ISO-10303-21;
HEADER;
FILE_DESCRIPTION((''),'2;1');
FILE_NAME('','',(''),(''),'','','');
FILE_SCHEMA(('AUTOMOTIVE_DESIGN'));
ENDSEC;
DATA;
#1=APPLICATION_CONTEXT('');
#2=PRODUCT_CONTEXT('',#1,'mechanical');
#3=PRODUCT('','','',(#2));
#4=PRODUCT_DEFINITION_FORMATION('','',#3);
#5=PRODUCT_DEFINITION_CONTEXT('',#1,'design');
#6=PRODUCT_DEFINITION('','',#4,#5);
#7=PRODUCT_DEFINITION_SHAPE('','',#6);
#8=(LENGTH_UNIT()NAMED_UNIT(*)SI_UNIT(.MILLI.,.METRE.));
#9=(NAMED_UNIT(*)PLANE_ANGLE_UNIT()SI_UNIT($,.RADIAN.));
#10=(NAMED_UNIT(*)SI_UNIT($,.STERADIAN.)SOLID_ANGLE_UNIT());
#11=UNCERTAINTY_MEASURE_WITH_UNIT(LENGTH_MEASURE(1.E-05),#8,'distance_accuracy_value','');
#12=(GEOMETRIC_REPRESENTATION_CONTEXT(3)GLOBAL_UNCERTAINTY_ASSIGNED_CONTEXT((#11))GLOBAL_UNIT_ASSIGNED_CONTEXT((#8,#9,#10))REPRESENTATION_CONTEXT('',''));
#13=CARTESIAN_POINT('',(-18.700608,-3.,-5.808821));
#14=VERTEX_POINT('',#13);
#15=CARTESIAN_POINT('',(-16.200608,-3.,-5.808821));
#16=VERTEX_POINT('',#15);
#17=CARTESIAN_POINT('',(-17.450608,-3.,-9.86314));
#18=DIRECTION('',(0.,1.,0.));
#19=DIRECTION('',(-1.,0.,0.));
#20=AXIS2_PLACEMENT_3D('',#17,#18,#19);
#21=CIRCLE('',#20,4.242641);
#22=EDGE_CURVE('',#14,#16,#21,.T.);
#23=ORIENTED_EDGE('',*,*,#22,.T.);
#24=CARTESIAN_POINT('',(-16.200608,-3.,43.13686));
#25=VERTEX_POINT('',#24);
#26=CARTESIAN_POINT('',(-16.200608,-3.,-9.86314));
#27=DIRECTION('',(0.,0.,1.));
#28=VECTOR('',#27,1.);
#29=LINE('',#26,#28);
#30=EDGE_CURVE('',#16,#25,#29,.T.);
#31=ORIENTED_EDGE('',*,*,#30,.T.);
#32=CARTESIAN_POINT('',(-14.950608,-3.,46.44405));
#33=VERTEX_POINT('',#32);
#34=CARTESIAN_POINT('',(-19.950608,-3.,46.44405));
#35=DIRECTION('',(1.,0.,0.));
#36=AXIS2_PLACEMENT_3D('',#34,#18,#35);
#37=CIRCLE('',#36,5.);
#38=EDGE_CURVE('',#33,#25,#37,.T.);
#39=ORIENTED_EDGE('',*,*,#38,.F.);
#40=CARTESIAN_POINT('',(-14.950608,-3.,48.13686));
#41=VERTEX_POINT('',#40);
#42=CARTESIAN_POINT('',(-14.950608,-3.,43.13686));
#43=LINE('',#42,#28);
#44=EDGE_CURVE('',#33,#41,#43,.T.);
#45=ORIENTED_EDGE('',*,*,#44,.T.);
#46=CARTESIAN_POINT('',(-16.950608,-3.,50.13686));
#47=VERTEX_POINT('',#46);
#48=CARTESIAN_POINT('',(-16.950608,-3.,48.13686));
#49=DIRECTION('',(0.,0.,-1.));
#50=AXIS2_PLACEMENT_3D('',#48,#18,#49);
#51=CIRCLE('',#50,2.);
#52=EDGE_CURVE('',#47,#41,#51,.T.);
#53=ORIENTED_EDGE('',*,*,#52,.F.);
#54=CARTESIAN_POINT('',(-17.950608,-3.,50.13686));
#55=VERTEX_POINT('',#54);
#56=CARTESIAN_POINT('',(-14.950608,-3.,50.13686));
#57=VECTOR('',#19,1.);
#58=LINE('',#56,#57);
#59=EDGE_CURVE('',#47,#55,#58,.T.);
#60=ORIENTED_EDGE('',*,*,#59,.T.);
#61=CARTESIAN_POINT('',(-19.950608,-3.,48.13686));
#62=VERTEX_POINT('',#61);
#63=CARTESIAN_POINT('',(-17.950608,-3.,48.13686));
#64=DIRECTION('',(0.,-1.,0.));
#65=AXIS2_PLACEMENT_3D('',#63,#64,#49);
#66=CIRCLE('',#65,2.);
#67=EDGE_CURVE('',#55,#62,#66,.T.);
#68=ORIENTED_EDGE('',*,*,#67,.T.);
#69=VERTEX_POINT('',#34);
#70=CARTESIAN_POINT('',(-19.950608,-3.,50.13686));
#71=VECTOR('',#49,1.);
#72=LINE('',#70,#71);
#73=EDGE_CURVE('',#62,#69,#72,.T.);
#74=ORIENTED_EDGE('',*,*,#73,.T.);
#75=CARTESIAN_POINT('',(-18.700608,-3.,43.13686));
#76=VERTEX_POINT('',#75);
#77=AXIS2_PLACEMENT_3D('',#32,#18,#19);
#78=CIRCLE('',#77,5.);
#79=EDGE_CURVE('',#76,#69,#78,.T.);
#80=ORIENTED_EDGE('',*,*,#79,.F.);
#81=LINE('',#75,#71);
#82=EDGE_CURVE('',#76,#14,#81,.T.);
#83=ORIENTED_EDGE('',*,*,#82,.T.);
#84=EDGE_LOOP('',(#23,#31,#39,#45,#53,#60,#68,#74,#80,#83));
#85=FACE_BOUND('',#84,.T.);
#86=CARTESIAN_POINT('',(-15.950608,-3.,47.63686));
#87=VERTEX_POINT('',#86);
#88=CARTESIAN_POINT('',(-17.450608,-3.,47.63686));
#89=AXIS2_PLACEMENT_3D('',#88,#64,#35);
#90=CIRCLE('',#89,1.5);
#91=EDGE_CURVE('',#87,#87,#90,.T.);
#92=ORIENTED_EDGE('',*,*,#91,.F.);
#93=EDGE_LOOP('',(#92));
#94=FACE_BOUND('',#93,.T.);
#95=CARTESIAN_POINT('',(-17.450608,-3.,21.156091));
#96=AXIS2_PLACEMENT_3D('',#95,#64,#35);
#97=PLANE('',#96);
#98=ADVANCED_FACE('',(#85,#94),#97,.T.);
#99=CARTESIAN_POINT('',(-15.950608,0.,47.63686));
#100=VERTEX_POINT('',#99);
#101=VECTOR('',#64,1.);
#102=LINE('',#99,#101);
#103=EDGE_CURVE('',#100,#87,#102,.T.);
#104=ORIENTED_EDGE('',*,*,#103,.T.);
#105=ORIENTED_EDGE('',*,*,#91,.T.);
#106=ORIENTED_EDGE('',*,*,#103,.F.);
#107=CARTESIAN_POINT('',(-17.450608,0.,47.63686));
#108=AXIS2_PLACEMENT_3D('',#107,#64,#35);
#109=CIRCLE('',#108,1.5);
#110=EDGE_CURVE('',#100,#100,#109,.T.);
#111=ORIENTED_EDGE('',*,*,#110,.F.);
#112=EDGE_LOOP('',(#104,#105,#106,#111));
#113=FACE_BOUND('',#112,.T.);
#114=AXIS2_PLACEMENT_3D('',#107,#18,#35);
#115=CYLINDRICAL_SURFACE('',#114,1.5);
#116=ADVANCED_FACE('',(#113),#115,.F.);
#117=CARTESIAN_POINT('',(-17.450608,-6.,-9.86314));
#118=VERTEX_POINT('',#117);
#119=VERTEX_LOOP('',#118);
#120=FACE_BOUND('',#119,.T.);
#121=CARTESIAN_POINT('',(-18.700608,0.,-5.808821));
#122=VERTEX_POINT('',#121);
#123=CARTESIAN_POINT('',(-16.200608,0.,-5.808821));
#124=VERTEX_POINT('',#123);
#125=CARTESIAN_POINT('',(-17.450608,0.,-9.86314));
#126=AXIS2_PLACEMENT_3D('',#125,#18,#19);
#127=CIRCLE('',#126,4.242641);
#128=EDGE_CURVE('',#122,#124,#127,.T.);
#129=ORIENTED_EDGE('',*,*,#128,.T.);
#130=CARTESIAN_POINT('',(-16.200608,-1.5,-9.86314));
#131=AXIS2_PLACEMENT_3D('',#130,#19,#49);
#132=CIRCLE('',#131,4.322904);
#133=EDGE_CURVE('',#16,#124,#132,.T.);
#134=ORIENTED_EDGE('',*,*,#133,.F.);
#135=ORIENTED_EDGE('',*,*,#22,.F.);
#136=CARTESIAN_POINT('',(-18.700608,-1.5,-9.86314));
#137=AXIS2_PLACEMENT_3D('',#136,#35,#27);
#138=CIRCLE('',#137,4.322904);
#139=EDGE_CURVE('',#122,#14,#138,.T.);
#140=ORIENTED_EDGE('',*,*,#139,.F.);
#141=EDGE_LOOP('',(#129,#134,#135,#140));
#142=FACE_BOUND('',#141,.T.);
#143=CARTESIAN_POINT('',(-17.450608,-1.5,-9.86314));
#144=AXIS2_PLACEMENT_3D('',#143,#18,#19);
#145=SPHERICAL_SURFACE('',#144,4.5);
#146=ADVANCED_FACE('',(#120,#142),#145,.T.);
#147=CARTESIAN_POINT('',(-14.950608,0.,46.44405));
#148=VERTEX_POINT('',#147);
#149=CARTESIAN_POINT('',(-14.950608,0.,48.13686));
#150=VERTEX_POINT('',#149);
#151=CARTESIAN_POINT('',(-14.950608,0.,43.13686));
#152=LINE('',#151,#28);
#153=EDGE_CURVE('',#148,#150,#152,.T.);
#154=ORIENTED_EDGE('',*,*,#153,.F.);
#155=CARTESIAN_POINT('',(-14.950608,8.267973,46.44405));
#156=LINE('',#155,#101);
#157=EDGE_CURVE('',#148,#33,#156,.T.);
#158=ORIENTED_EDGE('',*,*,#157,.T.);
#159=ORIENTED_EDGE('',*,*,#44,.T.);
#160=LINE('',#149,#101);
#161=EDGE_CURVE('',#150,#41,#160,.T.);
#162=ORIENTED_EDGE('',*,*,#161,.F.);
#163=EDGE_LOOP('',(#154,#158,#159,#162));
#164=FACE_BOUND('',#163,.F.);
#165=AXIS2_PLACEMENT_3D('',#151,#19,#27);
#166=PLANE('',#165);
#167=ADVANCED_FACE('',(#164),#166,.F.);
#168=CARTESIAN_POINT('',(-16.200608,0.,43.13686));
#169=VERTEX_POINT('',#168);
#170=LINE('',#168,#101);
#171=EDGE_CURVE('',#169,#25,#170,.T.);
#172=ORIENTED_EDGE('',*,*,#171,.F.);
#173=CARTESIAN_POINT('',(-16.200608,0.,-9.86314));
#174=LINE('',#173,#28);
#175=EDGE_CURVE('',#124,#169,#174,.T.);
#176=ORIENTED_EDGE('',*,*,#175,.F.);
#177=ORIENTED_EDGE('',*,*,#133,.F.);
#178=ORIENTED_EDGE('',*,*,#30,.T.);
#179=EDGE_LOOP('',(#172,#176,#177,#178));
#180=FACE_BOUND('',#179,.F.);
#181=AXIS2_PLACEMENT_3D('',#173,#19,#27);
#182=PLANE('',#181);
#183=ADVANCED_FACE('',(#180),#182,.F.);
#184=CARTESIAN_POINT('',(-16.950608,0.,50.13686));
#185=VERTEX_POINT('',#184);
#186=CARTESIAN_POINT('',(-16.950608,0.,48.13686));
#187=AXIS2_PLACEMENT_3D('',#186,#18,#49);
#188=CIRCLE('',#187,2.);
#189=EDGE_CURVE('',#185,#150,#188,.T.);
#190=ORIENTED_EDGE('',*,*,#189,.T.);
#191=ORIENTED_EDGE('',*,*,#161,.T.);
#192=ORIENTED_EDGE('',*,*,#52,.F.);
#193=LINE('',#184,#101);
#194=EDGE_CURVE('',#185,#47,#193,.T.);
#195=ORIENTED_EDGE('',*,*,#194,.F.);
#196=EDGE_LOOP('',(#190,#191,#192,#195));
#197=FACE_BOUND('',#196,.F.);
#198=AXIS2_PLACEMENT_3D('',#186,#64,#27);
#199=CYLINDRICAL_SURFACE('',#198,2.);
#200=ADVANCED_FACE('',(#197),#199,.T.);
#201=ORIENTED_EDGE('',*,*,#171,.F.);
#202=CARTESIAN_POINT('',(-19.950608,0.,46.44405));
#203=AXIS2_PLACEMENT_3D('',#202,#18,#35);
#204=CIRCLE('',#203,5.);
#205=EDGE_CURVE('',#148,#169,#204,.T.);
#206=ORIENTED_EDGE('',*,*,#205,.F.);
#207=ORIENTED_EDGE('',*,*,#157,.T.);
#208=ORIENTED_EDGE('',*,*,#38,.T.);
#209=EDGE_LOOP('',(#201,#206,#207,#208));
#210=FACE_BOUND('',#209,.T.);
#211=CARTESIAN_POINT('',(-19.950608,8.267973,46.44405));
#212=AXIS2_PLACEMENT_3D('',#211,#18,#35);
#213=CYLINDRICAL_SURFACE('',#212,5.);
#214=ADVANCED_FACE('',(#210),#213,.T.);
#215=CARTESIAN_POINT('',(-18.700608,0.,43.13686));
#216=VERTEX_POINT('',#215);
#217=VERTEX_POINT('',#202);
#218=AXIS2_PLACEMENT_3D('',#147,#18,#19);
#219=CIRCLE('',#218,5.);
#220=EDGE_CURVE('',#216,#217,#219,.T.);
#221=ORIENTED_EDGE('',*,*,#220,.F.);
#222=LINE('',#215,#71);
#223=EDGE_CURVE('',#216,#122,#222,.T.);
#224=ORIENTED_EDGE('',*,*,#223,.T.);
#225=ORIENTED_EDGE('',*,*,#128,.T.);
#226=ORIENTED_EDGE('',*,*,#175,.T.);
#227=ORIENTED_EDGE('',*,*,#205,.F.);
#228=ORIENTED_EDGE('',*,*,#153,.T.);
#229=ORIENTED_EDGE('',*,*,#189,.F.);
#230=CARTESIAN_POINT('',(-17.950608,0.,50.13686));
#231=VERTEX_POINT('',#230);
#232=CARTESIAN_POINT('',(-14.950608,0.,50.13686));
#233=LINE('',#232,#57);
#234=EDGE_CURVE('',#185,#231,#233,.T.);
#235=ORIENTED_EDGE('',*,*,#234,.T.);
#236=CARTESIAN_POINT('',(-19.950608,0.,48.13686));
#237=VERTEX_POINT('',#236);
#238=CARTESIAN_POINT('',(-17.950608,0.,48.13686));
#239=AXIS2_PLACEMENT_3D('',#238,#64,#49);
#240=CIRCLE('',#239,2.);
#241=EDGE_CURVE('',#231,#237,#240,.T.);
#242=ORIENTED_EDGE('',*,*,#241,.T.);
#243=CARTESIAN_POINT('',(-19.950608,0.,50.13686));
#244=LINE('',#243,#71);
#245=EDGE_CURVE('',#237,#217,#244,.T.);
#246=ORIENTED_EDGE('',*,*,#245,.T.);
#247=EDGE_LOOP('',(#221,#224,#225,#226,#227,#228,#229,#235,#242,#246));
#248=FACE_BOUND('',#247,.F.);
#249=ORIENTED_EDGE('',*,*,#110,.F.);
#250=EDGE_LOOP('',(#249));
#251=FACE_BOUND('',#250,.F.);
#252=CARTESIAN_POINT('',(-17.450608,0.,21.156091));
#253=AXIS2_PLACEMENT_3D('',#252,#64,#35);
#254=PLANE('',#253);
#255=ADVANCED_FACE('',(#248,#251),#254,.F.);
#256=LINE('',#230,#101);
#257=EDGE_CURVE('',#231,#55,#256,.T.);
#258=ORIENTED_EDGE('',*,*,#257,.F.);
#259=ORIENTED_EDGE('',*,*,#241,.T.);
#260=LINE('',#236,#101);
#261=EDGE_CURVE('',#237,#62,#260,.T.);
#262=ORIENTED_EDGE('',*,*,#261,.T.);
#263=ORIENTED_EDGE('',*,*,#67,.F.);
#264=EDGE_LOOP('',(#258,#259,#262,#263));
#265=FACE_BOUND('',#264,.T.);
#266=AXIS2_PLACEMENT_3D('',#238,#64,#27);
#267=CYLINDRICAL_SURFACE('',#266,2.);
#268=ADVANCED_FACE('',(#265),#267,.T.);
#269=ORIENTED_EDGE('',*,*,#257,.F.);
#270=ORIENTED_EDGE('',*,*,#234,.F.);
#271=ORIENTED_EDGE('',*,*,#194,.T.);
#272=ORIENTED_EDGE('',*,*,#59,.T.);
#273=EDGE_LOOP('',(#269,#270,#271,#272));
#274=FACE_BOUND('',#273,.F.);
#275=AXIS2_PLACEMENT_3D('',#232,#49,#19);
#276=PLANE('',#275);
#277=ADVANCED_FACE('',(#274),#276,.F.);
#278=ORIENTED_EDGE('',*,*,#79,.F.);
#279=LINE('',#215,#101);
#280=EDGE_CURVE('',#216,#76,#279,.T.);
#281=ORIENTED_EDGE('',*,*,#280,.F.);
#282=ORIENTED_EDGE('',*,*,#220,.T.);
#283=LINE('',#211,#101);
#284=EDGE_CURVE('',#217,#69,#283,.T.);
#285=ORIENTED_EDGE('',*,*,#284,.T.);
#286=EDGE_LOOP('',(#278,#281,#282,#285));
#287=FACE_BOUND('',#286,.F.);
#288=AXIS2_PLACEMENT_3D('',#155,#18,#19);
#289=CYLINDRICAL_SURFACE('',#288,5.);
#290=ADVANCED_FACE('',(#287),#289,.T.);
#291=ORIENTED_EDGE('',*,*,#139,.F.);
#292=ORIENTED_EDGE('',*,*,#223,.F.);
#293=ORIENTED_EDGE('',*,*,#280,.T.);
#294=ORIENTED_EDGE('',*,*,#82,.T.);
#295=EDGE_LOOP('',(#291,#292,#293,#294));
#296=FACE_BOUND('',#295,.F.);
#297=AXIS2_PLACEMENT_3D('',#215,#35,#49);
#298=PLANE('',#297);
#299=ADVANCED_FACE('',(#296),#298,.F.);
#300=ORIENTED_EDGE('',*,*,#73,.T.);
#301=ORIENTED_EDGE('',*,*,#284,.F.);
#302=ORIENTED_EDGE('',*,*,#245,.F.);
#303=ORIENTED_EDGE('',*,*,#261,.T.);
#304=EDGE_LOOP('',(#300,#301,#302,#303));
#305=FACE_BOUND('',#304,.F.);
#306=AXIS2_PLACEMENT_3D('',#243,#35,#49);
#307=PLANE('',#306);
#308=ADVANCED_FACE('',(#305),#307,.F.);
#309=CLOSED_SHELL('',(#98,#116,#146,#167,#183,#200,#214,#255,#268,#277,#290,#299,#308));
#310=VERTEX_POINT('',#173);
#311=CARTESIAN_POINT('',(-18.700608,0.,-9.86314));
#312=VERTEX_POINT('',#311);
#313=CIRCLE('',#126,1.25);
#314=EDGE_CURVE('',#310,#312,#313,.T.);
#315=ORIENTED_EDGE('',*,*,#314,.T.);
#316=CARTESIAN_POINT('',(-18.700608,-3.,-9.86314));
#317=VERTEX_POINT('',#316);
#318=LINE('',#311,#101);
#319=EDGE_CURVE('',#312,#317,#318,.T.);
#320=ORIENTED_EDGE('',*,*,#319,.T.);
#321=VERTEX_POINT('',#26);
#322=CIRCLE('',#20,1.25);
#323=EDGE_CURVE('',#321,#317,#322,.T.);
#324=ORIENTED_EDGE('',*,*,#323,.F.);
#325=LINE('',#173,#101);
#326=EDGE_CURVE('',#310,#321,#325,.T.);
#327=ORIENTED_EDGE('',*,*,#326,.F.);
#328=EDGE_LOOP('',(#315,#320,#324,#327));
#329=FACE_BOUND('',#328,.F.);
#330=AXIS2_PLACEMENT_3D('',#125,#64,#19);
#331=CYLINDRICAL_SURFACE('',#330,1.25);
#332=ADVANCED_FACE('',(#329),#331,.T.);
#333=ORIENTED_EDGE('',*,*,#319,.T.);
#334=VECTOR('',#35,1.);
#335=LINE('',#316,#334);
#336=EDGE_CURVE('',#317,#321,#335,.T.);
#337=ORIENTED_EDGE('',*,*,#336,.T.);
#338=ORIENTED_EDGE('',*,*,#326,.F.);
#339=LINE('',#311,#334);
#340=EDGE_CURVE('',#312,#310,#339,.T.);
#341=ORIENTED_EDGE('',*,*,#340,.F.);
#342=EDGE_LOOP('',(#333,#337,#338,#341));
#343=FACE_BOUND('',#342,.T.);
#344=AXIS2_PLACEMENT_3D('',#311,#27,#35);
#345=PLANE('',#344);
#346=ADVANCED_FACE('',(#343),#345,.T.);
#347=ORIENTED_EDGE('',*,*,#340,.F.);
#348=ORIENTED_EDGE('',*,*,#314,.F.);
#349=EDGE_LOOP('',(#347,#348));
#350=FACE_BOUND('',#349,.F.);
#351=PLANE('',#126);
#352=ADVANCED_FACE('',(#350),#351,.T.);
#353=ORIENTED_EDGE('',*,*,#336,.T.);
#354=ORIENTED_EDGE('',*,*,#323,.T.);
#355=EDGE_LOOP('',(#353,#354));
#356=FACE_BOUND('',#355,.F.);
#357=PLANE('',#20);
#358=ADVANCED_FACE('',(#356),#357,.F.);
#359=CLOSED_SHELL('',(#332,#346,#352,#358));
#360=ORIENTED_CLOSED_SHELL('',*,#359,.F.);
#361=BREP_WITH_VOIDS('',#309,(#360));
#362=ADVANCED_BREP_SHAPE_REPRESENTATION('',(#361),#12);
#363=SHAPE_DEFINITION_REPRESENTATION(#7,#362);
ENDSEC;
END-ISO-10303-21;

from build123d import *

# Parameters (mm, degrees)
F0_R        = 1.5
F1_DEPTH    = 3
F2_R        = 2
F3_R        = 2
F4_T1_DEPTH = 19.5359456942


# Not quite as in the source:
# - a fillet or chamfer that OpenCascade refuses, or shapes differently, is made with other operations: its cross-section is extruded or revolved along the edge and cut away or added


with BuildPart() as f1:
    # F0 (on Front) → F1 (new body)
    with BuildSketch(Plane.XZ):
        Polygon((-14.9506077915, 50.13686046), (-19.9506077915, 50.13686046), (-19.9506077915, 43.13686046), (-18.7006077915, 43.13686046), (-18.7006077915, 10.13686046), (-18.7006077915, -9.86313954), (-17.4506077915, -9.86313954), (-16.2006077915, -9.86313954), (-16.2006077915, 10.13686046), (-16.2006077915, 43.13686046), (-14.9506077915, 43.13686046), align=None)
        with Locations((-17.4506077915, 47.63686046)):
            Circle(F0_R, mode=Mode.SUBTRACT)
    extrude(amount=F1_DEPTH)

    # F2
    f2_edges = [f1.edges().sort_by_distance(p)[0] for p in [
        (-14.950608, -1.5, 50.13686),
    ]]
    fillet(f2_edges, radius=F2_R)

    # F3
    f3_edges = [f1.edges().sort_by_distance(p)[0] for p in [
        (-19.950608, -1.5, 50.13686),
    ]]
    fillet(f3_edges, radius=F3_R)

    # F4: fillet of radius 5 on 2 edges, made by hand

    # F4_s2 → F4_t1 (cut)
    with BuildSketch(Plane.XZ.offset(-8.2679728471)):
        with BuildLine():
            ThreePointArc((-14.9506077915, 46.4440495989), (-15.2735360581, 44.6762826459), (-16.2006077915, 43.13686046))
            Line((-16.2006077915, 43.13686046), (-14.9506077915, 43.13686046))
            Line((-14.9506077915, 43.13686046), (-14.9506077915, 46.4440495989))
        make_face()
        with BuildLine():
            ThreePointArc((-19.9506077915, 46.4440495989), (-19.627679525, 44.6762826459), (-18.7006077915, 43.13686046))
            Line((-18.7006077915, 43.13686046), (-19.9506077915, 43.13686046))
            Line((-19.9506077915, 43.13686046), (-19.9506077915, 46.4440495989))
        make_face()
    extrude(amount=F4_T1_DEPTH, mode=Mode.SUBTRACT)

    # F5 (on face) → F6 (revolve)
    with BuildSketch(Plane(origin=(0, 0, -9.86313954), x_dir=(1, 0, 0), z_dir=(0, 0, -1))):
        with BuildLine():
            Line((-17.4506077915, 3), (-17.4506077915, 6))
            ThreePointArc((-17.4506077915, 6), (-21.9506077915, 1.5), (-17.4506077915, -3))
            Line((-17.4506077915, -3), (-17.4506077915, 0))
            Line((-17.4506077915, 0), (-18.7006077915, 0))
            Line((-18.7006077915, 0), (-18.7006077915, 3))
            Line((-18.7006077915, 3), (-17.4506077915, 3))
        make_face()
    revolve(axis=Axis((-17.4506077915, -1.5, -9.86313954), (0, 1, 0)))


solid = f1.part
